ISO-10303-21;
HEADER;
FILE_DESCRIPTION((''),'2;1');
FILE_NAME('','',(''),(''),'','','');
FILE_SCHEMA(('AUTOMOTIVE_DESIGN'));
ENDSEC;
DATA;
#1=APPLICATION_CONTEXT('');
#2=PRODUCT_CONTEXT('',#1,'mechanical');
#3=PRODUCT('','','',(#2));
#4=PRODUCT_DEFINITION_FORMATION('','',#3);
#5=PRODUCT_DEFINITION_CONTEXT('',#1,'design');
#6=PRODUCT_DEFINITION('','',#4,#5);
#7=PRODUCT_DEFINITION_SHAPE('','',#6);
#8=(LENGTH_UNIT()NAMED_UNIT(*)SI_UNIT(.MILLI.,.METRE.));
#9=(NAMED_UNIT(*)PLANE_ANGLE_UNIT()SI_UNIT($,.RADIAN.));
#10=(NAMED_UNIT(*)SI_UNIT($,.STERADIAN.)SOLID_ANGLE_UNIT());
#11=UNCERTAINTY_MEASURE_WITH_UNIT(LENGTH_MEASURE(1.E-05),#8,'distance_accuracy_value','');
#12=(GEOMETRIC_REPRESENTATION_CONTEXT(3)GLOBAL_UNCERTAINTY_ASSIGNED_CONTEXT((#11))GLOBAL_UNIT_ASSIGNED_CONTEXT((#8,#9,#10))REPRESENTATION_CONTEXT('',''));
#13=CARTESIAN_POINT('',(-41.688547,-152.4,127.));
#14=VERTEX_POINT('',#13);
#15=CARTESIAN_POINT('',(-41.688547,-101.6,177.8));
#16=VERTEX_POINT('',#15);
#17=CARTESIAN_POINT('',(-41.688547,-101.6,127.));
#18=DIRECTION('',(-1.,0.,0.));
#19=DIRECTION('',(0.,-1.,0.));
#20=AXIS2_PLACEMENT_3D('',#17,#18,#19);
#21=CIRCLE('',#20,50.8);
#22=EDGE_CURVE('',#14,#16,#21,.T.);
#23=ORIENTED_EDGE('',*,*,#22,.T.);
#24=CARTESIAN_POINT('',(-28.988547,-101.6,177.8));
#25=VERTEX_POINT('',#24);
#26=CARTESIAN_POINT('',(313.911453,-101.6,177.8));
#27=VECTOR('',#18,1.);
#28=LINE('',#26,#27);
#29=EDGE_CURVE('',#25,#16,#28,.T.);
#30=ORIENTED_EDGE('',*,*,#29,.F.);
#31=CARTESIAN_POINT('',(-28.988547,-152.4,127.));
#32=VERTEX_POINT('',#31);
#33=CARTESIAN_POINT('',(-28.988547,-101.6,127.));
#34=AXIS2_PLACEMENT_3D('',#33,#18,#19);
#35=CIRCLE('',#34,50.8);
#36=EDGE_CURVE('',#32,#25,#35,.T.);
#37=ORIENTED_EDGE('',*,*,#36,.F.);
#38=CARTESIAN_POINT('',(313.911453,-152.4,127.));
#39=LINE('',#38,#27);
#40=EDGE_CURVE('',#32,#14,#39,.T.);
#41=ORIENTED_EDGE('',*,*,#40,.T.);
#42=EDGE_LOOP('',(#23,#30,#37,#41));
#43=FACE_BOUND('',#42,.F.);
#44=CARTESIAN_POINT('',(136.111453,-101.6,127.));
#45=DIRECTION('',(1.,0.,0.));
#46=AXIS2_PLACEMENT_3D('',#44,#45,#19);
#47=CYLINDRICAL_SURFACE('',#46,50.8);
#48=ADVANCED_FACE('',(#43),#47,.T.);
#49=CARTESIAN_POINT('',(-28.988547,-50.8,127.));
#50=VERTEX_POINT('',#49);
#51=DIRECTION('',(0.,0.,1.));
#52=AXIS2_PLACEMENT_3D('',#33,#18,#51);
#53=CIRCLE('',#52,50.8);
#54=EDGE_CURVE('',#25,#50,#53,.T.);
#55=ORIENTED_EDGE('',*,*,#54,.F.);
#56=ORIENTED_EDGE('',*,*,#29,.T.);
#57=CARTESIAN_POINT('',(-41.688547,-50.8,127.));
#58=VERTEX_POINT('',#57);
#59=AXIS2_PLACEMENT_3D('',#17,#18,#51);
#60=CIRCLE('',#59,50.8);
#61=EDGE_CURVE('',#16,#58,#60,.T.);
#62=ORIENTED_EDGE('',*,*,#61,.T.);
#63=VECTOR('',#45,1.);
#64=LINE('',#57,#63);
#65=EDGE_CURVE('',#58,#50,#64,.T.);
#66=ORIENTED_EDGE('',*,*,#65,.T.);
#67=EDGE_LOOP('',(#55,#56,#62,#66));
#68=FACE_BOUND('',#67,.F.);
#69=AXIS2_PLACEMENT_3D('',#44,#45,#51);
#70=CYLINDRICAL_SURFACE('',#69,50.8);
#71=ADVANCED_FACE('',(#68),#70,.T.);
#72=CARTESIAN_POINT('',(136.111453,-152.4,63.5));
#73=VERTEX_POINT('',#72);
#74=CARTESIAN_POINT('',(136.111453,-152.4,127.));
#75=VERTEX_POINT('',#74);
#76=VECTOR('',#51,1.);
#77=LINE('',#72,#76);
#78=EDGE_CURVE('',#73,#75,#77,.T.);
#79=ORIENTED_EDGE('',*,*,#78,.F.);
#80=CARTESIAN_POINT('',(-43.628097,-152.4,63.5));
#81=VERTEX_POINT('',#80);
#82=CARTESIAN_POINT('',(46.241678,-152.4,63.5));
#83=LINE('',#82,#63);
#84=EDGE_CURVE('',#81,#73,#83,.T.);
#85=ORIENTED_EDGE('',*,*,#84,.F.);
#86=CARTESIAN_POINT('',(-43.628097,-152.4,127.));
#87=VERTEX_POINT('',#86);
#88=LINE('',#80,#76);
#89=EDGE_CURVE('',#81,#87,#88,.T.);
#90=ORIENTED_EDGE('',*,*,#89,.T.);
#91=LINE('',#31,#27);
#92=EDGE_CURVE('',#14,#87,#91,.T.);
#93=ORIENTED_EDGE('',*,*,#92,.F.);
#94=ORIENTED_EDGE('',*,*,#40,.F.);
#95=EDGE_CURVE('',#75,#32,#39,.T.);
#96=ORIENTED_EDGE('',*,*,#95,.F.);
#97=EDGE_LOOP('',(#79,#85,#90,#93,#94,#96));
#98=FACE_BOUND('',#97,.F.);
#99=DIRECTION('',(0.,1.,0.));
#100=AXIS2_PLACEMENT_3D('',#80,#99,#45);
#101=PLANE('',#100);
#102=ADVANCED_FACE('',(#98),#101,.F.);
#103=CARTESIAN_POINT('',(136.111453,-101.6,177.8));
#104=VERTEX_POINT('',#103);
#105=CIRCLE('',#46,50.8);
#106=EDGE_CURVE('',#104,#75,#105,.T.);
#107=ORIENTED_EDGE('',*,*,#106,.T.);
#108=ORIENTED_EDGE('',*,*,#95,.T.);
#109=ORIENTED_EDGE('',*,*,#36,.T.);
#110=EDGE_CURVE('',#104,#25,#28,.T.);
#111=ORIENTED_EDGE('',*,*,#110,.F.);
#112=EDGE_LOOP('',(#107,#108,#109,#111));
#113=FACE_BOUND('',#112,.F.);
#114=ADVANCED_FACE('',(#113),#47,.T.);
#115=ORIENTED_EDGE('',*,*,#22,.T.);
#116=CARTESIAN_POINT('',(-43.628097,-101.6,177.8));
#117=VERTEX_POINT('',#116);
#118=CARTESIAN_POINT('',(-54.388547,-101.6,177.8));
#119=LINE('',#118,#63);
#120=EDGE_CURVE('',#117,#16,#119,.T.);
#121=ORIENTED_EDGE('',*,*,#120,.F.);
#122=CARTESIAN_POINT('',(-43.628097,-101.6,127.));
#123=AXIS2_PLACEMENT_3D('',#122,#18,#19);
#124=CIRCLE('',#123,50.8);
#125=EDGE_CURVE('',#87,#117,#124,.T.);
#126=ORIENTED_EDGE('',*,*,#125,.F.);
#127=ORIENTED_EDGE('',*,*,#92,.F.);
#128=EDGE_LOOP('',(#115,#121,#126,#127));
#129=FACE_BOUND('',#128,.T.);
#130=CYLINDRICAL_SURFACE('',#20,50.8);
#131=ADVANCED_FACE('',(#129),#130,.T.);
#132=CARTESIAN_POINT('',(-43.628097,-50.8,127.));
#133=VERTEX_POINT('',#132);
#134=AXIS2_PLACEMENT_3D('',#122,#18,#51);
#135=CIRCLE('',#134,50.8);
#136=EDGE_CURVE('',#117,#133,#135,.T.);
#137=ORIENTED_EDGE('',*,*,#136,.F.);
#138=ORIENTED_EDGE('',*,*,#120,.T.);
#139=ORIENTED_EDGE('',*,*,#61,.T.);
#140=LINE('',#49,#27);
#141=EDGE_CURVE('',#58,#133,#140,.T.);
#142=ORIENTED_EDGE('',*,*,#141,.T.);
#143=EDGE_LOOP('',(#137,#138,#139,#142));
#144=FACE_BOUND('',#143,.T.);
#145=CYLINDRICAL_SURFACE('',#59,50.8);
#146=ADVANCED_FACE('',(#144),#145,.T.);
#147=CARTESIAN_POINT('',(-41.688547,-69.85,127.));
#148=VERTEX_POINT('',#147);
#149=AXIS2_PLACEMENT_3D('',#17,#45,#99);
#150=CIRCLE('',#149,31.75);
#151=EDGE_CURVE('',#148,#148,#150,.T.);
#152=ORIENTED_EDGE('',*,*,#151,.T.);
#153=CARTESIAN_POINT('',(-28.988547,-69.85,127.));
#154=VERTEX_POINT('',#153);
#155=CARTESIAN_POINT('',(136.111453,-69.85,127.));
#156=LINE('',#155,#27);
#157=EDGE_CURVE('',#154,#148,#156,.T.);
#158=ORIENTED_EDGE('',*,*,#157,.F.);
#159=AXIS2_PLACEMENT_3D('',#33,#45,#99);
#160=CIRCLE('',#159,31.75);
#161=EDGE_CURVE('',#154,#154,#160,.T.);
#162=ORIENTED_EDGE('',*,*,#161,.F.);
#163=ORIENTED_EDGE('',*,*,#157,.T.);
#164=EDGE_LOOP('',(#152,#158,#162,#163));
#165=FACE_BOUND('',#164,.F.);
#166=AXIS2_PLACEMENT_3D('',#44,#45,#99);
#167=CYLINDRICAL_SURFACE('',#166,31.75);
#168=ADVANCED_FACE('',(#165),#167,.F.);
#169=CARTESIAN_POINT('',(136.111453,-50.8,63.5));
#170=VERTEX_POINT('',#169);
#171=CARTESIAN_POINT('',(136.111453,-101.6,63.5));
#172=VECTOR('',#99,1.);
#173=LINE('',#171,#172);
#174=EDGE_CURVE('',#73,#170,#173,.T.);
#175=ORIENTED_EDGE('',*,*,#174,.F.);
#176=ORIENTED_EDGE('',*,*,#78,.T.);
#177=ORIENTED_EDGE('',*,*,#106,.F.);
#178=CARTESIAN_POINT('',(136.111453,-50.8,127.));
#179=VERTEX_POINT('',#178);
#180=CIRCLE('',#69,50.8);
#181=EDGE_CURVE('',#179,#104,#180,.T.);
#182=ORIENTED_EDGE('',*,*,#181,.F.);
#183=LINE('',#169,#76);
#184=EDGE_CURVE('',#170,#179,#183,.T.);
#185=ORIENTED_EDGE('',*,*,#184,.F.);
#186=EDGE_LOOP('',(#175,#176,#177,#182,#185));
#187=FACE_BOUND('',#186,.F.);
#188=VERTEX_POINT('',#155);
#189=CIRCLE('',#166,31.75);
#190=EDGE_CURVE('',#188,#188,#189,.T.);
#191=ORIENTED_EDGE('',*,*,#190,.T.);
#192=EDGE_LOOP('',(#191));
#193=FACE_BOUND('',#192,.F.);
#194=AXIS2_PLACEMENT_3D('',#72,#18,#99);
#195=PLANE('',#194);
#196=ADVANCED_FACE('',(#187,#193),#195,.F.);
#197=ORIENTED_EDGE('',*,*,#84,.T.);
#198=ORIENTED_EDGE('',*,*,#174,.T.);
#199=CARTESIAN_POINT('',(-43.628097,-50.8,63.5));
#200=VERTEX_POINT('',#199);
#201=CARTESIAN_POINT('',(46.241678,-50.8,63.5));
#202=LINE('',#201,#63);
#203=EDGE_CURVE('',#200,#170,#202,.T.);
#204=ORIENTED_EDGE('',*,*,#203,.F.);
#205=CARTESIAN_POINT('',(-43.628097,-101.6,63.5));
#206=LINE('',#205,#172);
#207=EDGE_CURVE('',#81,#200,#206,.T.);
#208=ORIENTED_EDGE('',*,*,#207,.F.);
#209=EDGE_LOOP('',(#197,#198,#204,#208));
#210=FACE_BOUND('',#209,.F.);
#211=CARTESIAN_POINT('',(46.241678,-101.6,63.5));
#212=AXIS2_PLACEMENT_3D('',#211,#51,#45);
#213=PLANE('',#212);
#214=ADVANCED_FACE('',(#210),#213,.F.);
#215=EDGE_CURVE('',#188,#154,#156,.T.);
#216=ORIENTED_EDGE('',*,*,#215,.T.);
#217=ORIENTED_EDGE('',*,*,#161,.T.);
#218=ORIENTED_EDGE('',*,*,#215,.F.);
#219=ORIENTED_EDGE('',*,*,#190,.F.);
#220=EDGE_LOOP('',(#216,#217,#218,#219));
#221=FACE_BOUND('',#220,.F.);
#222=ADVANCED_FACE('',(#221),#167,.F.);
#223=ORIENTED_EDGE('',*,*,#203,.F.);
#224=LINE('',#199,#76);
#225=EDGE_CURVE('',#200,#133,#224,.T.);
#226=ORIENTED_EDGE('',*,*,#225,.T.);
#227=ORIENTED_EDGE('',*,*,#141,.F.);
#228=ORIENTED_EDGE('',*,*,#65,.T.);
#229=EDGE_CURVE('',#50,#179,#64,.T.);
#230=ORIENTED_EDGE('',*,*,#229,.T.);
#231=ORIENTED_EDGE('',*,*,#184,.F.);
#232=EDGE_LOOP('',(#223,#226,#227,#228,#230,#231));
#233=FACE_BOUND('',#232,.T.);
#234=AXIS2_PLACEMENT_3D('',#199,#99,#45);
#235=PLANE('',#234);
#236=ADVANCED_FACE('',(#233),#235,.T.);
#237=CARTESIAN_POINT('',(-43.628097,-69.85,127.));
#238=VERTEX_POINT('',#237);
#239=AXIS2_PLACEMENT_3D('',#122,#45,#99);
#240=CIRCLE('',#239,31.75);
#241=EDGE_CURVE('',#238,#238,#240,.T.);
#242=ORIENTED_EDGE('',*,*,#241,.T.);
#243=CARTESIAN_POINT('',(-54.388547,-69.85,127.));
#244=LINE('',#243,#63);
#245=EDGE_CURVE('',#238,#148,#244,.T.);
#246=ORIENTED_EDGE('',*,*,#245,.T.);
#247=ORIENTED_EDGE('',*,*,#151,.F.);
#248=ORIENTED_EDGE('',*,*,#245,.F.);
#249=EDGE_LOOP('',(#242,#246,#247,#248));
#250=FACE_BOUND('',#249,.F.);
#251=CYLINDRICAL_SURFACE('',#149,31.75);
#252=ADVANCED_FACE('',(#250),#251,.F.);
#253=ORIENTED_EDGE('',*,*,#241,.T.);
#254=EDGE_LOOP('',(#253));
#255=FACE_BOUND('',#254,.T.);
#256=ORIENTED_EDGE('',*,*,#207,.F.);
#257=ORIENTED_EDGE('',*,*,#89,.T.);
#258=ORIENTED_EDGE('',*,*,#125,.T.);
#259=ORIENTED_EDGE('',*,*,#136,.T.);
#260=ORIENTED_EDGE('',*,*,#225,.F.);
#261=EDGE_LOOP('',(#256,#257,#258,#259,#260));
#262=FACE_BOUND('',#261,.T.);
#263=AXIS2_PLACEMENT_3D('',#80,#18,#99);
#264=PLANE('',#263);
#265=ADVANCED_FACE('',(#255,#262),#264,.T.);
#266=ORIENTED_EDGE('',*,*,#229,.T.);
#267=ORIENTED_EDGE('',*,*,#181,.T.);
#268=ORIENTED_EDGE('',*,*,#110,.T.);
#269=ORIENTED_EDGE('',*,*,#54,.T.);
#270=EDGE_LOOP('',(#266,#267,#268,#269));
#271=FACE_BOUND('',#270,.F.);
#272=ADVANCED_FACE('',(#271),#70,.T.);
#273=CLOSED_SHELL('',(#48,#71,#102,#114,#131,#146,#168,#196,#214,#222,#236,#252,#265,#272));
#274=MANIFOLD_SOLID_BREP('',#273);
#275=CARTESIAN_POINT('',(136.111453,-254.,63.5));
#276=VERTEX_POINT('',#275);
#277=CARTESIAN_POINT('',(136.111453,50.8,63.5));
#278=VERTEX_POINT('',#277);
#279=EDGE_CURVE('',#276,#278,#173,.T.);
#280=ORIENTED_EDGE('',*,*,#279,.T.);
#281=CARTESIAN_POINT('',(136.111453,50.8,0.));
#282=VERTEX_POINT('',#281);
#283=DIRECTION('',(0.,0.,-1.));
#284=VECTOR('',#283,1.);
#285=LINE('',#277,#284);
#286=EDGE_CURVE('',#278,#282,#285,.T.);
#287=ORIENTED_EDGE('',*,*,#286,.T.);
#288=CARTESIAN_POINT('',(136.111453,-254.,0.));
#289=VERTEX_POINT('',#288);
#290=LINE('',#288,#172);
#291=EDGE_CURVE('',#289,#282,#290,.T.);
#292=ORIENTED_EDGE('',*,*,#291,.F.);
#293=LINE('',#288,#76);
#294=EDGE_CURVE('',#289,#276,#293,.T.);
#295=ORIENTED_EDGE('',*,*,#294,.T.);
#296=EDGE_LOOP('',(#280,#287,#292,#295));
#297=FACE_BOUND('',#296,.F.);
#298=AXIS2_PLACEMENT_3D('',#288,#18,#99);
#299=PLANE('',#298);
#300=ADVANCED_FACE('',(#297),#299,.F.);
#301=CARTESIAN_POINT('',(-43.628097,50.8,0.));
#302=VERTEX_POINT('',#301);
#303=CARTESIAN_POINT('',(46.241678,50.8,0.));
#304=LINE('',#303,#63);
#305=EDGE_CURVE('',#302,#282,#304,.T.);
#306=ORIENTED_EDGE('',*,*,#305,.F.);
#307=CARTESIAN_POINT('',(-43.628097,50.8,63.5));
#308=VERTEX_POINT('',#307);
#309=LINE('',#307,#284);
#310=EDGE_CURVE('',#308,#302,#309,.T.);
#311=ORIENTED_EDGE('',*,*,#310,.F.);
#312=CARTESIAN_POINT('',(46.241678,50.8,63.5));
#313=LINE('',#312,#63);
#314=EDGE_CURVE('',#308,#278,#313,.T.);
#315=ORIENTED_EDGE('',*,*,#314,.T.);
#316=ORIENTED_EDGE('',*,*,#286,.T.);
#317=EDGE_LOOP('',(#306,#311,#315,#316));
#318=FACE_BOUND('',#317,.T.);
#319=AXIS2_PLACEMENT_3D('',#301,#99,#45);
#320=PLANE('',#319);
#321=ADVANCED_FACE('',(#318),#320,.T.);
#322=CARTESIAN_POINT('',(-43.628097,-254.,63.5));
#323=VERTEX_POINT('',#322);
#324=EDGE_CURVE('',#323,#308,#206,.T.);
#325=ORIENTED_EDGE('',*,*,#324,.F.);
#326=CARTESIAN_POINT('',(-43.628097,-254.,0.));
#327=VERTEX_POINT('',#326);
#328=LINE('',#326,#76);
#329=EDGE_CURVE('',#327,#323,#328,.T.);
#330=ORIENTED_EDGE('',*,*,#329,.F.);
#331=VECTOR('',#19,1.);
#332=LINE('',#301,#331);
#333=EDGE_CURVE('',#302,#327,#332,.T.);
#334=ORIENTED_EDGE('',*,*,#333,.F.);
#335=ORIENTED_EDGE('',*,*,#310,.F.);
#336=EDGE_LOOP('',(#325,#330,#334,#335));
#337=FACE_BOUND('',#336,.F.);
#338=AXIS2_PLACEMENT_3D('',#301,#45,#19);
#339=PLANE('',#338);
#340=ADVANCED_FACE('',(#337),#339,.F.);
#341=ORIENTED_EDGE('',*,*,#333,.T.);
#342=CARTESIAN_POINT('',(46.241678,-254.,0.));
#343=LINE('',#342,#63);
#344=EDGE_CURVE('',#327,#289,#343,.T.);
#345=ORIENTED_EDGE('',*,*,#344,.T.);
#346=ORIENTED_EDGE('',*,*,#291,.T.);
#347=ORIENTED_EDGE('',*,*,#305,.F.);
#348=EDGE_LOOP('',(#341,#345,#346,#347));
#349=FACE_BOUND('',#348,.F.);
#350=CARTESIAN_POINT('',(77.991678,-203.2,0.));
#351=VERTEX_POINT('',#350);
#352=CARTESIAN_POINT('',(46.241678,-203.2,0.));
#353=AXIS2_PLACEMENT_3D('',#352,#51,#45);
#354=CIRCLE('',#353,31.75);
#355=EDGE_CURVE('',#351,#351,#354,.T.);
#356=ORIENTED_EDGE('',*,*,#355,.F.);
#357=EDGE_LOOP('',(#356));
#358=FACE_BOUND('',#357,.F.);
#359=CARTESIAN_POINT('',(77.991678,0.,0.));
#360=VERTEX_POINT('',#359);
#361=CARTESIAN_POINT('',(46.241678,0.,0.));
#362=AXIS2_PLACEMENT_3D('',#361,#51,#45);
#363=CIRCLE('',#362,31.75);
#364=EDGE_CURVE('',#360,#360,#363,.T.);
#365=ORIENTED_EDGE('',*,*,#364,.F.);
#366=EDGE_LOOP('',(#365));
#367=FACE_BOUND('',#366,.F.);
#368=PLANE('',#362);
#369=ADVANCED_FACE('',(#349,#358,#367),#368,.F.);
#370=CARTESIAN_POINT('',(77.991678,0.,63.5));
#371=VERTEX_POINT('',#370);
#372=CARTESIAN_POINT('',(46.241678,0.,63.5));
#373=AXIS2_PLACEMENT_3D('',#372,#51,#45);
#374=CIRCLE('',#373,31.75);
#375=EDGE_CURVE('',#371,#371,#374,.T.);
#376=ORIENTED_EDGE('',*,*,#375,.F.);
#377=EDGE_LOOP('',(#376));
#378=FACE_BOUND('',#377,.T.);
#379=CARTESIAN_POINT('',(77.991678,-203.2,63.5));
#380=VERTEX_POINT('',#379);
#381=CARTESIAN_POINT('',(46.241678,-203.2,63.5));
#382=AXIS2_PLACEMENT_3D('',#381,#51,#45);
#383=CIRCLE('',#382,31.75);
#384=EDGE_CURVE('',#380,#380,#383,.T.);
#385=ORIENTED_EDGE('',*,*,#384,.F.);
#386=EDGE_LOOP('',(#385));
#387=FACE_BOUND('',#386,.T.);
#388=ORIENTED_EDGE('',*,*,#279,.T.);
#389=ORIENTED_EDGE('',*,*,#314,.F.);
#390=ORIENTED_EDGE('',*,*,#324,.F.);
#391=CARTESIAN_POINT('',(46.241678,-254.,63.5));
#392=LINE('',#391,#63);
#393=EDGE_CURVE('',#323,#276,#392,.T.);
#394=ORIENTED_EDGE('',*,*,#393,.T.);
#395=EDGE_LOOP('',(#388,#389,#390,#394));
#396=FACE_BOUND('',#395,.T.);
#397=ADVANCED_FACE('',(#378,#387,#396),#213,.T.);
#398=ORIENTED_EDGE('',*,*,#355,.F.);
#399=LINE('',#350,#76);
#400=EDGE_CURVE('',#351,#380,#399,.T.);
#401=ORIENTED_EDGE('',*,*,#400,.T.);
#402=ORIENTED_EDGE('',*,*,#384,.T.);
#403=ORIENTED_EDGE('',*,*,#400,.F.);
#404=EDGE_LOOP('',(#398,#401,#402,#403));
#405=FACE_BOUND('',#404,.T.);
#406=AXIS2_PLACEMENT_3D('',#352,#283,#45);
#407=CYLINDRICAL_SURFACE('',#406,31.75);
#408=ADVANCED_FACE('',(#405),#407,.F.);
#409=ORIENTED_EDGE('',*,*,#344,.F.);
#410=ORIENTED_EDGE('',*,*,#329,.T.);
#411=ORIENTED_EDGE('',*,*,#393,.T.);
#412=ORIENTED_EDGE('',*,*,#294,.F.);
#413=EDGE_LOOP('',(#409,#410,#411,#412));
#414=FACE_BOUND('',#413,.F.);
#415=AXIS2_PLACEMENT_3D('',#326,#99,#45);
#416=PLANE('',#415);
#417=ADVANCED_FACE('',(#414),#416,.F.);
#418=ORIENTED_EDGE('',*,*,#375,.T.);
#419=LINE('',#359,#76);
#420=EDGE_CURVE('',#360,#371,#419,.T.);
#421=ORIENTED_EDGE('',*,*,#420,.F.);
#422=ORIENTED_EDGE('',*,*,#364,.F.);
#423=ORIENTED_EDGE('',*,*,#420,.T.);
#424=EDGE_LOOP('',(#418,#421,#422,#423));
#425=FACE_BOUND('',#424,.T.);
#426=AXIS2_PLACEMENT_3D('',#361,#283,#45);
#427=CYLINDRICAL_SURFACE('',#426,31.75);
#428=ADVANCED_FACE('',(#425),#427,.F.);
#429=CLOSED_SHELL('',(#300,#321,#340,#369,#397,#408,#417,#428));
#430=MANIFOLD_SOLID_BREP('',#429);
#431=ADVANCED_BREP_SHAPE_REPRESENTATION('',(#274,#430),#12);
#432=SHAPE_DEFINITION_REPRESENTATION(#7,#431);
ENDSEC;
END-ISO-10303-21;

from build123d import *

# Parameters (mm, degrees)
F0_W      = 179.7395497561
F0_H      = 101.6
F0_R      = 31.75
F1_DEPTH  = 25.4
F1_FACE_W = 179.7395497561
F1_FACE_H = 304.8
F1_FACE_R = 31.75
F2_DEPTH  = 38.1
F3_W      = 179.7395497561
F3_H      = 101.6
F4_DEPTH  = 114.3
F5_R      = 31.75
F6_DEPTH  = 177.8
F7_R      = 31.75
F8_DEPTH  = 12.7


with BuildPart() as f1:
    # F0 (on Top) → F1 (new body)
    with BuildSketch(Plane.XY):
        with Locations((46.2416782975, 0)):
            Rectangle(F0_W, F0_H)
        with Locations((46.2416782975, 0)):
            Circle(F0_R, mode=Mode.SUBTRACT)
        with Locations((46.2416782975, -101.6)):
            Rectangle(F0_W, F0_H)
        with Locations((46.2416782975, -203.2)):
            Rectangle(F0_W, F0_H)
        with Locations((46.2416782975, -203.2)):
            Circle(F0_R, mode=Mode.SUBTRACT)
    extrude(amount=F1_DEPTH)

    # F0 (on Top) + F1_face (on face) → F2 (join)
    with BuildSketch(Plane.XY):
        with Locations((46.2416782975, 0)):
            Rectangle(F0_W, F0_H)
        with Locations((46.2416782975, 0)):
            Circle(F0_R, mode=Mode.SUBTRACT)
        with Locations((46.2416782975, -101.6)):
            Rectangle(F0_W, F0_H)
        with Locations((46.2416782975, -203.2)):
            Rectangle(F0_W, F0_H)
        with Locations((46.2416782975, -203.2)):
            Circle(F0_R, mode=Mode.SUBTRACT)
    with BuildSketch(Plane(origin=(46.2416782975, -101.6, 25.4), x_dir=(1, 0, 0), z_dir=(0, 0, 1))):
        Rectangle(F1_FACE_W, F1_FACE_H)
        with Locations((0, 101.6)):
            Circle(F1_FACE_R, mode=Mode.SUBTRACT)
        with Locations((0, -101.6)):
            Circle(F1_FACE_R, mode=Mode.SUBTRACT)
    extrude(amount=F2_DEPTH)


with BuildPart() as f4:
    # F3 (on face) → F4 (new body)
    with BuildSketch(Plane.XY.offset(63.5)):
        with Locations((46.2416782975, -101.6)):
            Rectangle(F3_W, F3_H)
    extrude(amount=F4_DEPTH)

    # F5 (on face) → F6 (cut, symmetric)
    with BuildSketch(Plane.YZ.offset(136.1114531755)):
        with Locations((-101.6, 127)):
            Circle(F5_R)
        with BuildLine():
            ThreePointArc((-152.4, 127), (-137.5210244843, 162.9210244843), (-101.6, 177.8))
            Line((-101.6, 177.8), (-152.4, 177.8))
            Line((-152.4, 177.8), (-152.4, 127))
        make_face()
        with BuildLine():
            ThreePointArc((-101.6, 177.8), (-65.6789755157, 162.9210244843), (-50.8, 127))
            Line((-50.8, 127), (-50.8, 160.3168845177))
            Line((-50.8, 160.3168845177), (-50.8, 177.8))
            Line((-50.8, 177.8), (-101.6, 177.8))
        make_face()
    extrude(amount=F6_DEPTH, both=True, mode=Mode.SUBTRACT)

    # F6_face (on face) + F7 (on face) → F8 (cut, symmetric)
    with BuildSketch(Plane(origin=(-41.6885468245, -101.6, 127), x_dir=(0, 1, 0), z_dir=(1, 0, 0))):
        with BuildLine():
            ThreePointArc((-50.8, 0), (-35.9210244843, 35.9210244843), (0, 50.8))
            Line((0, 50.8), (-50.8, 50.8))
            Line((-50.8, 50.8), (-50.8, 0))
        make_face()
        with BuildLine():
            Line((50.8, 50.8), (0, 50.8))
            ThreePointArc((0, 50.8), (35.9210244843, 35.9210244843), (50.8, 0))
            Line((50.8, 0), (50.8, 50.8))
        make_face()
    with BuildSketch(Plane.YZ.offset(-41.6885468245)):
        with Locations((-101.6, 127)):
            Circle(F7_R)
    extrude(amount=F8_DEPTH, both=True, mode=Mode.SUBTRACT)


solid = Compound([f1.part, f4.part])
